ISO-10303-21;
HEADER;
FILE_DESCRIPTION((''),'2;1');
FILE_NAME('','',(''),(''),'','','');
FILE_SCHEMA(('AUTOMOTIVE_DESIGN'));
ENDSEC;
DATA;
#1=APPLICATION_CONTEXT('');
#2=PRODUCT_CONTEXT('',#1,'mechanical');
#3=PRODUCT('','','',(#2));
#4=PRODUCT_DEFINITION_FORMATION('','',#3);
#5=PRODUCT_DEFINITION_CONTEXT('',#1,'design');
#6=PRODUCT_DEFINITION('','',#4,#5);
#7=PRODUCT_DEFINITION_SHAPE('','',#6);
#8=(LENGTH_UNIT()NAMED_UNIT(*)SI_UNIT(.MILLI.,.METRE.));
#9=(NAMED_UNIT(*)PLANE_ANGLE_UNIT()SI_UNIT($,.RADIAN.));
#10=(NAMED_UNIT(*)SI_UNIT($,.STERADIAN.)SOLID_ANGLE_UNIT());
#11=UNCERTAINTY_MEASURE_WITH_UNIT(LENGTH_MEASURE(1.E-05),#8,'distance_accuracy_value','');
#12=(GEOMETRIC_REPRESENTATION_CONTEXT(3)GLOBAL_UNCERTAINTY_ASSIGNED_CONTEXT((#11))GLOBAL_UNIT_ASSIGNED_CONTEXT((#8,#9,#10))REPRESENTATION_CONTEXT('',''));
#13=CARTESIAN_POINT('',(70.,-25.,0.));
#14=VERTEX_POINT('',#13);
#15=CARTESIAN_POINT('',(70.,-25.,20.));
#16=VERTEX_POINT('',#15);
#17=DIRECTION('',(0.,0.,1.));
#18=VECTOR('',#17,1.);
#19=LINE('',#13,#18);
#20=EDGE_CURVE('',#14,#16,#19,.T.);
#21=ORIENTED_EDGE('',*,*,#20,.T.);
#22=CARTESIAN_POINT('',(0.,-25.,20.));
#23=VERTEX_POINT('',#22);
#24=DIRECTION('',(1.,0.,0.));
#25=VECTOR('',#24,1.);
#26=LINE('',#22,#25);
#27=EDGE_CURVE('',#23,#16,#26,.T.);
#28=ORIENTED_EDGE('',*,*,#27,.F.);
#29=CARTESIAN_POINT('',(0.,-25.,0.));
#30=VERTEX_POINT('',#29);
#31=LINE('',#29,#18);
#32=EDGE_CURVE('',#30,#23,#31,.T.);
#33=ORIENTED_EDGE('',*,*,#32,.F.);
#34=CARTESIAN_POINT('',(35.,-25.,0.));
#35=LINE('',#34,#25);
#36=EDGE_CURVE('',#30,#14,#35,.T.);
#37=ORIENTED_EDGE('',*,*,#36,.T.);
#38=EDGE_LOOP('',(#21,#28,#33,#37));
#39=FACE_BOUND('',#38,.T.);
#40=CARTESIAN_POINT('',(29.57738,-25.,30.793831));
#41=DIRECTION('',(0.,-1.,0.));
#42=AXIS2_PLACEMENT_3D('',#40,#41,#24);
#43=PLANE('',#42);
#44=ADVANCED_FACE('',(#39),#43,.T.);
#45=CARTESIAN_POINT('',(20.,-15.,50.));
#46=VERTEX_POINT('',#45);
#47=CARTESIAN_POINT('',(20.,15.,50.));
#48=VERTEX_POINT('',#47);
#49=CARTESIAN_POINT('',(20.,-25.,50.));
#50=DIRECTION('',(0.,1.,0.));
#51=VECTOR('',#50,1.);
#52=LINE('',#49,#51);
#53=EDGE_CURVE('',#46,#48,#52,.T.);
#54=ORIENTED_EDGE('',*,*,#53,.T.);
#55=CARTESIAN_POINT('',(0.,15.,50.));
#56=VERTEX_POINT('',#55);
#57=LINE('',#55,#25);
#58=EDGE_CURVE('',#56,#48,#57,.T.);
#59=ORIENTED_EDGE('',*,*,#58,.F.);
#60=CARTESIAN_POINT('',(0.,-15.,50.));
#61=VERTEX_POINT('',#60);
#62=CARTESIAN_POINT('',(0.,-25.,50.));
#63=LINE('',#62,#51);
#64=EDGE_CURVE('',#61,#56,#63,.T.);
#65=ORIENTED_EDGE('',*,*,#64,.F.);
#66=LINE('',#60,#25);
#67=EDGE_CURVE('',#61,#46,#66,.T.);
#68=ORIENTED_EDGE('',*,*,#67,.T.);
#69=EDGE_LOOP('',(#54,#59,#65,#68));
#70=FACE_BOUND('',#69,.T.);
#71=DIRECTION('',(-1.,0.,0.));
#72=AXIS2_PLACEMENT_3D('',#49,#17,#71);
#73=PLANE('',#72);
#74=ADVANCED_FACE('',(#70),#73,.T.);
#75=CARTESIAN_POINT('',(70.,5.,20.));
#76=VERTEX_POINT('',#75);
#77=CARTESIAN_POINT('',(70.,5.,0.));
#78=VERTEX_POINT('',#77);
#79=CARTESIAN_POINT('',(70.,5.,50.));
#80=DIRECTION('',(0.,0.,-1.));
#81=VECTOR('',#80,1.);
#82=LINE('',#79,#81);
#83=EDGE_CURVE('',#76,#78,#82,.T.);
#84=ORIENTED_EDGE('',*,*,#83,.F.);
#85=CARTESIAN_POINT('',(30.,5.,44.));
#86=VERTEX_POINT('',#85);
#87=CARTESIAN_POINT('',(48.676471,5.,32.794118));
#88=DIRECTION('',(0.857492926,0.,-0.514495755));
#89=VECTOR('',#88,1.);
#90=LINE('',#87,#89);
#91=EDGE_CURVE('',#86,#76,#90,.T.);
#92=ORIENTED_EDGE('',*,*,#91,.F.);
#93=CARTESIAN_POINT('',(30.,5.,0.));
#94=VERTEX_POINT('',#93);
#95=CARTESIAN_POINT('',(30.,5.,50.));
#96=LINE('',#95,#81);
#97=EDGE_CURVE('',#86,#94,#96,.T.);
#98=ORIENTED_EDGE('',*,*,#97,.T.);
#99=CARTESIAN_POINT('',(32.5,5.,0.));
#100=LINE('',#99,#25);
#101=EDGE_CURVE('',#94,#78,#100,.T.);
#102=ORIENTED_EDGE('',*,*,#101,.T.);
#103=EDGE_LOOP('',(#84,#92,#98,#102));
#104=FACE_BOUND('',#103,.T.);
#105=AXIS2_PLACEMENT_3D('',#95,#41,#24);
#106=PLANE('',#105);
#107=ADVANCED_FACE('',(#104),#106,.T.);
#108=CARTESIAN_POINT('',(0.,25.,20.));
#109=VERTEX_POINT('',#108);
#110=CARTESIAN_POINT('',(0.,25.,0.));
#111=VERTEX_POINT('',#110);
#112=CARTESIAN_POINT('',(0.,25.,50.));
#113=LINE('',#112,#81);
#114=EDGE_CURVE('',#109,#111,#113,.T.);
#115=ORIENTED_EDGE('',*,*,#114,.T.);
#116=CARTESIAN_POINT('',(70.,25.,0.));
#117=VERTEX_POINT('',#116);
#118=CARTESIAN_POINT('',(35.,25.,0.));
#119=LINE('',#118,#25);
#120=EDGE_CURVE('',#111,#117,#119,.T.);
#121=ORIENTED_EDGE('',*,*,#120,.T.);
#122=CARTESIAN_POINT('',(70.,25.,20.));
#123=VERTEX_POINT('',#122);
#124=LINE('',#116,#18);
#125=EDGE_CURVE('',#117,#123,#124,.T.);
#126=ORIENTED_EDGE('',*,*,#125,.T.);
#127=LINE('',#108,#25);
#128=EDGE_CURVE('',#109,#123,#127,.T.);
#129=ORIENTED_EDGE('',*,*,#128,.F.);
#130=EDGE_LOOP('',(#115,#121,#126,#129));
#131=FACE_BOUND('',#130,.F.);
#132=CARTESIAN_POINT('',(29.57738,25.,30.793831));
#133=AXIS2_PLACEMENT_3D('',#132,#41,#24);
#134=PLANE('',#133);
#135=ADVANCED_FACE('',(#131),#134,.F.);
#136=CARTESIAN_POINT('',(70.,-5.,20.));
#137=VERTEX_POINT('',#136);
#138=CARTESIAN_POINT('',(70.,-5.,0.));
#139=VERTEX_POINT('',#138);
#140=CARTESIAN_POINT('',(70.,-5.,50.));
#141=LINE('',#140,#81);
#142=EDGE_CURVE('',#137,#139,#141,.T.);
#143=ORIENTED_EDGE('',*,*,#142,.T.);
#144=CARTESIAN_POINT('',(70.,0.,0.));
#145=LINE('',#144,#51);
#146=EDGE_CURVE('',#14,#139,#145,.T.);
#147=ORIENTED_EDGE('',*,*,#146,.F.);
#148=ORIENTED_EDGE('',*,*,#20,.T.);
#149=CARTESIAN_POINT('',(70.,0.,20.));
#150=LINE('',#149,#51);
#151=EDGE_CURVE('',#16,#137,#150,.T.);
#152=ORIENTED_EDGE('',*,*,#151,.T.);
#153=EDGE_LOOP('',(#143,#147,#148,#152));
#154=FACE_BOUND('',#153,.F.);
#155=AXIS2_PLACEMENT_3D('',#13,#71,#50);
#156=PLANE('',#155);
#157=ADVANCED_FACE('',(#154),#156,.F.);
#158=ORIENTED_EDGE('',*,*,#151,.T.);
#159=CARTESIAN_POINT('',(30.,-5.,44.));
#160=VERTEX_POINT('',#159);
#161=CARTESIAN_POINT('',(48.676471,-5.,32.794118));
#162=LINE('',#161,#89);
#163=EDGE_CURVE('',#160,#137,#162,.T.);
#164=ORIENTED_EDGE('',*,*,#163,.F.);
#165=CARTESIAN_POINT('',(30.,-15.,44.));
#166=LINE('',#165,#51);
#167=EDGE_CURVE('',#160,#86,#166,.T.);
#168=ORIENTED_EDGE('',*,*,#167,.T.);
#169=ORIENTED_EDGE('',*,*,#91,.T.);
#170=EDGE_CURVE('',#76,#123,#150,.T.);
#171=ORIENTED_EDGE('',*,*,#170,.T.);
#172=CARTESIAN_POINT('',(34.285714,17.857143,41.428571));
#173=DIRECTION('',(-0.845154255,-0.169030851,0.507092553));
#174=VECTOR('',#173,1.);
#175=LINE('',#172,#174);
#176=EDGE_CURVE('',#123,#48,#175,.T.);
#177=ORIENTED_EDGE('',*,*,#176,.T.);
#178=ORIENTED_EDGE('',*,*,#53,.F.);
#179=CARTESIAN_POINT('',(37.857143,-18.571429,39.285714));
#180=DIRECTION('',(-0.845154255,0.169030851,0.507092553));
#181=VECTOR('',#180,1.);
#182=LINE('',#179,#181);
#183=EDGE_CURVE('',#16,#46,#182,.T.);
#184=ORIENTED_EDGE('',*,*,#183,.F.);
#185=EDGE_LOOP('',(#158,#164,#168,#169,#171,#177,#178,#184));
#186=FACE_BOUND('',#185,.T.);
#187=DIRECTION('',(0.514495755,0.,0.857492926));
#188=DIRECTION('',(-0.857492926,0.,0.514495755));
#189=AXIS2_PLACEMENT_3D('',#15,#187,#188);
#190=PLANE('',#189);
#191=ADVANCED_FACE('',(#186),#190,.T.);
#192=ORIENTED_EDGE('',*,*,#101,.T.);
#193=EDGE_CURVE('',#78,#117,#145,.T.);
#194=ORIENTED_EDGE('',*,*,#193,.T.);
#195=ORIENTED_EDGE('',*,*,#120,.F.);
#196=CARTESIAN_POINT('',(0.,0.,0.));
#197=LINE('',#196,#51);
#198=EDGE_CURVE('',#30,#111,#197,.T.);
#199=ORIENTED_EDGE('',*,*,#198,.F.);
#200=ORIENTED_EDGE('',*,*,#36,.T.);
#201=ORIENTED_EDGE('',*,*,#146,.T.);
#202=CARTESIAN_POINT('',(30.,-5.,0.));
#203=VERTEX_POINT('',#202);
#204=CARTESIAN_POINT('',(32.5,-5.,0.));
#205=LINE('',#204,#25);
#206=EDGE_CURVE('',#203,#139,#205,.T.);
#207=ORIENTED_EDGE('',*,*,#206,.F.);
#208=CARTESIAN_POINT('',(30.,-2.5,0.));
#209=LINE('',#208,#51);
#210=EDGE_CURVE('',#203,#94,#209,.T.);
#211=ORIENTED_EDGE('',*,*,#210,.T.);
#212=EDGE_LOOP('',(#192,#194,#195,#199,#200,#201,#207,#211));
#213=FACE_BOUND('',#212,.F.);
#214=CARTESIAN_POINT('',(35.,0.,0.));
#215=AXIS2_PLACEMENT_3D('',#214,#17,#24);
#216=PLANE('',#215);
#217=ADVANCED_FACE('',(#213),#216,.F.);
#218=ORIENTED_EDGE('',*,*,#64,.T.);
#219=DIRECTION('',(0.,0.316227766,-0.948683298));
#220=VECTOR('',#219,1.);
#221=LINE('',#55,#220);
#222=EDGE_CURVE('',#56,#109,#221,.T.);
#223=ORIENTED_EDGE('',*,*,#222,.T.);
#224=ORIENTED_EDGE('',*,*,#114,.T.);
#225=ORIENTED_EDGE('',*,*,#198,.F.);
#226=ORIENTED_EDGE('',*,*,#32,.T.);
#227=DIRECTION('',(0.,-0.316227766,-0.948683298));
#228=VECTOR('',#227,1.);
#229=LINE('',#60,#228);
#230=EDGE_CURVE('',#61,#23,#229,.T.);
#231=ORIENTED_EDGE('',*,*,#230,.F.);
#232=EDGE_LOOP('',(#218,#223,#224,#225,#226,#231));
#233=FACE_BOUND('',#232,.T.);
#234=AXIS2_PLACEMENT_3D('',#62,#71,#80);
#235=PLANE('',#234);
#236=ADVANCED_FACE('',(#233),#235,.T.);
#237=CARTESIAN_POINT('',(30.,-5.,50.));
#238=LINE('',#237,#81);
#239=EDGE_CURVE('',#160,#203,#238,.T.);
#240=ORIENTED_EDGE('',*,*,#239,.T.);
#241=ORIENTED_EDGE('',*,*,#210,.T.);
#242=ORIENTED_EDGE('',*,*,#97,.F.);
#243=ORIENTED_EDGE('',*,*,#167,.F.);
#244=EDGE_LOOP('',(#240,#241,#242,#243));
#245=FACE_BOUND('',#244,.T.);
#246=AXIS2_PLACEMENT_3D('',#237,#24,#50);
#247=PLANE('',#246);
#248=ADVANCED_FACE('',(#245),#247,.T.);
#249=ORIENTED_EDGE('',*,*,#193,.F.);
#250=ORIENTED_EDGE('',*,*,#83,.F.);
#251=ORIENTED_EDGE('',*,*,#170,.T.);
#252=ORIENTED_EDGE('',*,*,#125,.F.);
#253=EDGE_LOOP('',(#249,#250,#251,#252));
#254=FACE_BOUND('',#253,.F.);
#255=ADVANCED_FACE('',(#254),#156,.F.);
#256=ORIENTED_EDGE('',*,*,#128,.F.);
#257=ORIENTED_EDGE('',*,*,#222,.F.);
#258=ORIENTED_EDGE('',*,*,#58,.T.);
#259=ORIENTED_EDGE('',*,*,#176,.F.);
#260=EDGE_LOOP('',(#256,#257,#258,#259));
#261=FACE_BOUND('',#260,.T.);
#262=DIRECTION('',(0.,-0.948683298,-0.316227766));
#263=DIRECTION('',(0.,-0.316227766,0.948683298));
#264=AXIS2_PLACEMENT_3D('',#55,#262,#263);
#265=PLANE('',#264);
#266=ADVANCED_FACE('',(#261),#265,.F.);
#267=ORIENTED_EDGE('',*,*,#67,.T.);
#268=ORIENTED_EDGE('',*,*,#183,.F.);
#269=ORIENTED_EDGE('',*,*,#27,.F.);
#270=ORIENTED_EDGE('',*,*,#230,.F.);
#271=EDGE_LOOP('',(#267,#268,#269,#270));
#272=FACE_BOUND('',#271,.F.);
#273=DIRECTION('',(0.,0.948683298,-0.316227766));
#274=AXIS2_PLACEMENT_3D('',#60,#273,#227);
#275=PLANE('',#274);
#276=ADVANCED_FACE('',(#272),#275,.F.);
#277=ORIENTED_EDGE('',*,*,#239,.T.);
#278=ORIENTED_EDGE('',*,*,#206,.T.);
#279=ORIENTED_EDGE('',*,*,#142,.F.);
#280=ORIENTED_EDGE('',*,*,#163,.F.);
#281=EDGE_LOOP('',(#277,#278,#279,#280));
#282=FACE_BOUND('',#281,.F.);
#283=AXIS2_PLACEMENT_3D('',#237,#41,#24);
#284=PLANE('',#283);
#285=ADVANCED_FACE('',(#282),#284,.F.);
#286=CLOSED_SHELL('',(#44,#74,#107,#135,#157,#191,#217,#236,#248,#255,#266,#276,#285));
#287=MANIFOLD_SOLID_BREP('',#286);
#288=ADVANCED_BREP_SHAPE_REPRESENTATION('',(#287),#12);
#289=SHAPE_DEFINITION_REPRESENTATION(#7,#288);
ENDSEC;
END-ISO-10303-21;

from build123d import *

# Parameters (mm, degrees)
F0_W     = 70
F0_H     = 50
F1_DEPTH = 20
F3_DEPTH = 50
F5_DEPTH = 70.001
F6_W     = 40
F6_H     = 10
F7_DEPTH = 50.001


# Not quite as in the source:
# - a pattern or mirror of a feature is missing from the dataset's text; its kind, count and spacing are read off the source's solid


with BuildPart() as f1:
    # F0 (on Top) → F1 (new body)
    with BuildSketch(Plane.XY):
        with Locations((35, 0)):
            Rectangle(F0_W, F0_H)
    extrude(amount=F1_DEPTH)

    # F2 (on face) → F3 (join, through all)
    with BuildSketch(Plane.XZ.offset(25)):
        Polygon((0, 50), (0, 20), (70, 20), (20, 50), align=None)
    extrude(amount=-F3_DEPTH)

    # F4 (on face) → F5 (cut, through all)
    with BuildSketch(Plane(origin=(0, 0, 0), x_dir=(0, -1, 0), z_dir=(-1, 0, 0))):
        Polygon((25, 20), (25, 50), (15, 50), align=None)
    f5 = extrude(amount=-F5_DEPTH, mode=Mode.SUBTRACT)

    # F5_copies: F5 across plane
    add(f5.mirror(Plane.ZX), mode=Mode.SUBTRACT)

    # F6 (on face) → F7 (cut, through all)
    with BuildSketch(Plane.XY.offset(50)):
        with Locations((50, 0)):
            Rectangle(F6_W, F6_H)
    extrude(amount=-F7_DEPTH, mode=Mode.SUBTRACT)


solid = f1.part
